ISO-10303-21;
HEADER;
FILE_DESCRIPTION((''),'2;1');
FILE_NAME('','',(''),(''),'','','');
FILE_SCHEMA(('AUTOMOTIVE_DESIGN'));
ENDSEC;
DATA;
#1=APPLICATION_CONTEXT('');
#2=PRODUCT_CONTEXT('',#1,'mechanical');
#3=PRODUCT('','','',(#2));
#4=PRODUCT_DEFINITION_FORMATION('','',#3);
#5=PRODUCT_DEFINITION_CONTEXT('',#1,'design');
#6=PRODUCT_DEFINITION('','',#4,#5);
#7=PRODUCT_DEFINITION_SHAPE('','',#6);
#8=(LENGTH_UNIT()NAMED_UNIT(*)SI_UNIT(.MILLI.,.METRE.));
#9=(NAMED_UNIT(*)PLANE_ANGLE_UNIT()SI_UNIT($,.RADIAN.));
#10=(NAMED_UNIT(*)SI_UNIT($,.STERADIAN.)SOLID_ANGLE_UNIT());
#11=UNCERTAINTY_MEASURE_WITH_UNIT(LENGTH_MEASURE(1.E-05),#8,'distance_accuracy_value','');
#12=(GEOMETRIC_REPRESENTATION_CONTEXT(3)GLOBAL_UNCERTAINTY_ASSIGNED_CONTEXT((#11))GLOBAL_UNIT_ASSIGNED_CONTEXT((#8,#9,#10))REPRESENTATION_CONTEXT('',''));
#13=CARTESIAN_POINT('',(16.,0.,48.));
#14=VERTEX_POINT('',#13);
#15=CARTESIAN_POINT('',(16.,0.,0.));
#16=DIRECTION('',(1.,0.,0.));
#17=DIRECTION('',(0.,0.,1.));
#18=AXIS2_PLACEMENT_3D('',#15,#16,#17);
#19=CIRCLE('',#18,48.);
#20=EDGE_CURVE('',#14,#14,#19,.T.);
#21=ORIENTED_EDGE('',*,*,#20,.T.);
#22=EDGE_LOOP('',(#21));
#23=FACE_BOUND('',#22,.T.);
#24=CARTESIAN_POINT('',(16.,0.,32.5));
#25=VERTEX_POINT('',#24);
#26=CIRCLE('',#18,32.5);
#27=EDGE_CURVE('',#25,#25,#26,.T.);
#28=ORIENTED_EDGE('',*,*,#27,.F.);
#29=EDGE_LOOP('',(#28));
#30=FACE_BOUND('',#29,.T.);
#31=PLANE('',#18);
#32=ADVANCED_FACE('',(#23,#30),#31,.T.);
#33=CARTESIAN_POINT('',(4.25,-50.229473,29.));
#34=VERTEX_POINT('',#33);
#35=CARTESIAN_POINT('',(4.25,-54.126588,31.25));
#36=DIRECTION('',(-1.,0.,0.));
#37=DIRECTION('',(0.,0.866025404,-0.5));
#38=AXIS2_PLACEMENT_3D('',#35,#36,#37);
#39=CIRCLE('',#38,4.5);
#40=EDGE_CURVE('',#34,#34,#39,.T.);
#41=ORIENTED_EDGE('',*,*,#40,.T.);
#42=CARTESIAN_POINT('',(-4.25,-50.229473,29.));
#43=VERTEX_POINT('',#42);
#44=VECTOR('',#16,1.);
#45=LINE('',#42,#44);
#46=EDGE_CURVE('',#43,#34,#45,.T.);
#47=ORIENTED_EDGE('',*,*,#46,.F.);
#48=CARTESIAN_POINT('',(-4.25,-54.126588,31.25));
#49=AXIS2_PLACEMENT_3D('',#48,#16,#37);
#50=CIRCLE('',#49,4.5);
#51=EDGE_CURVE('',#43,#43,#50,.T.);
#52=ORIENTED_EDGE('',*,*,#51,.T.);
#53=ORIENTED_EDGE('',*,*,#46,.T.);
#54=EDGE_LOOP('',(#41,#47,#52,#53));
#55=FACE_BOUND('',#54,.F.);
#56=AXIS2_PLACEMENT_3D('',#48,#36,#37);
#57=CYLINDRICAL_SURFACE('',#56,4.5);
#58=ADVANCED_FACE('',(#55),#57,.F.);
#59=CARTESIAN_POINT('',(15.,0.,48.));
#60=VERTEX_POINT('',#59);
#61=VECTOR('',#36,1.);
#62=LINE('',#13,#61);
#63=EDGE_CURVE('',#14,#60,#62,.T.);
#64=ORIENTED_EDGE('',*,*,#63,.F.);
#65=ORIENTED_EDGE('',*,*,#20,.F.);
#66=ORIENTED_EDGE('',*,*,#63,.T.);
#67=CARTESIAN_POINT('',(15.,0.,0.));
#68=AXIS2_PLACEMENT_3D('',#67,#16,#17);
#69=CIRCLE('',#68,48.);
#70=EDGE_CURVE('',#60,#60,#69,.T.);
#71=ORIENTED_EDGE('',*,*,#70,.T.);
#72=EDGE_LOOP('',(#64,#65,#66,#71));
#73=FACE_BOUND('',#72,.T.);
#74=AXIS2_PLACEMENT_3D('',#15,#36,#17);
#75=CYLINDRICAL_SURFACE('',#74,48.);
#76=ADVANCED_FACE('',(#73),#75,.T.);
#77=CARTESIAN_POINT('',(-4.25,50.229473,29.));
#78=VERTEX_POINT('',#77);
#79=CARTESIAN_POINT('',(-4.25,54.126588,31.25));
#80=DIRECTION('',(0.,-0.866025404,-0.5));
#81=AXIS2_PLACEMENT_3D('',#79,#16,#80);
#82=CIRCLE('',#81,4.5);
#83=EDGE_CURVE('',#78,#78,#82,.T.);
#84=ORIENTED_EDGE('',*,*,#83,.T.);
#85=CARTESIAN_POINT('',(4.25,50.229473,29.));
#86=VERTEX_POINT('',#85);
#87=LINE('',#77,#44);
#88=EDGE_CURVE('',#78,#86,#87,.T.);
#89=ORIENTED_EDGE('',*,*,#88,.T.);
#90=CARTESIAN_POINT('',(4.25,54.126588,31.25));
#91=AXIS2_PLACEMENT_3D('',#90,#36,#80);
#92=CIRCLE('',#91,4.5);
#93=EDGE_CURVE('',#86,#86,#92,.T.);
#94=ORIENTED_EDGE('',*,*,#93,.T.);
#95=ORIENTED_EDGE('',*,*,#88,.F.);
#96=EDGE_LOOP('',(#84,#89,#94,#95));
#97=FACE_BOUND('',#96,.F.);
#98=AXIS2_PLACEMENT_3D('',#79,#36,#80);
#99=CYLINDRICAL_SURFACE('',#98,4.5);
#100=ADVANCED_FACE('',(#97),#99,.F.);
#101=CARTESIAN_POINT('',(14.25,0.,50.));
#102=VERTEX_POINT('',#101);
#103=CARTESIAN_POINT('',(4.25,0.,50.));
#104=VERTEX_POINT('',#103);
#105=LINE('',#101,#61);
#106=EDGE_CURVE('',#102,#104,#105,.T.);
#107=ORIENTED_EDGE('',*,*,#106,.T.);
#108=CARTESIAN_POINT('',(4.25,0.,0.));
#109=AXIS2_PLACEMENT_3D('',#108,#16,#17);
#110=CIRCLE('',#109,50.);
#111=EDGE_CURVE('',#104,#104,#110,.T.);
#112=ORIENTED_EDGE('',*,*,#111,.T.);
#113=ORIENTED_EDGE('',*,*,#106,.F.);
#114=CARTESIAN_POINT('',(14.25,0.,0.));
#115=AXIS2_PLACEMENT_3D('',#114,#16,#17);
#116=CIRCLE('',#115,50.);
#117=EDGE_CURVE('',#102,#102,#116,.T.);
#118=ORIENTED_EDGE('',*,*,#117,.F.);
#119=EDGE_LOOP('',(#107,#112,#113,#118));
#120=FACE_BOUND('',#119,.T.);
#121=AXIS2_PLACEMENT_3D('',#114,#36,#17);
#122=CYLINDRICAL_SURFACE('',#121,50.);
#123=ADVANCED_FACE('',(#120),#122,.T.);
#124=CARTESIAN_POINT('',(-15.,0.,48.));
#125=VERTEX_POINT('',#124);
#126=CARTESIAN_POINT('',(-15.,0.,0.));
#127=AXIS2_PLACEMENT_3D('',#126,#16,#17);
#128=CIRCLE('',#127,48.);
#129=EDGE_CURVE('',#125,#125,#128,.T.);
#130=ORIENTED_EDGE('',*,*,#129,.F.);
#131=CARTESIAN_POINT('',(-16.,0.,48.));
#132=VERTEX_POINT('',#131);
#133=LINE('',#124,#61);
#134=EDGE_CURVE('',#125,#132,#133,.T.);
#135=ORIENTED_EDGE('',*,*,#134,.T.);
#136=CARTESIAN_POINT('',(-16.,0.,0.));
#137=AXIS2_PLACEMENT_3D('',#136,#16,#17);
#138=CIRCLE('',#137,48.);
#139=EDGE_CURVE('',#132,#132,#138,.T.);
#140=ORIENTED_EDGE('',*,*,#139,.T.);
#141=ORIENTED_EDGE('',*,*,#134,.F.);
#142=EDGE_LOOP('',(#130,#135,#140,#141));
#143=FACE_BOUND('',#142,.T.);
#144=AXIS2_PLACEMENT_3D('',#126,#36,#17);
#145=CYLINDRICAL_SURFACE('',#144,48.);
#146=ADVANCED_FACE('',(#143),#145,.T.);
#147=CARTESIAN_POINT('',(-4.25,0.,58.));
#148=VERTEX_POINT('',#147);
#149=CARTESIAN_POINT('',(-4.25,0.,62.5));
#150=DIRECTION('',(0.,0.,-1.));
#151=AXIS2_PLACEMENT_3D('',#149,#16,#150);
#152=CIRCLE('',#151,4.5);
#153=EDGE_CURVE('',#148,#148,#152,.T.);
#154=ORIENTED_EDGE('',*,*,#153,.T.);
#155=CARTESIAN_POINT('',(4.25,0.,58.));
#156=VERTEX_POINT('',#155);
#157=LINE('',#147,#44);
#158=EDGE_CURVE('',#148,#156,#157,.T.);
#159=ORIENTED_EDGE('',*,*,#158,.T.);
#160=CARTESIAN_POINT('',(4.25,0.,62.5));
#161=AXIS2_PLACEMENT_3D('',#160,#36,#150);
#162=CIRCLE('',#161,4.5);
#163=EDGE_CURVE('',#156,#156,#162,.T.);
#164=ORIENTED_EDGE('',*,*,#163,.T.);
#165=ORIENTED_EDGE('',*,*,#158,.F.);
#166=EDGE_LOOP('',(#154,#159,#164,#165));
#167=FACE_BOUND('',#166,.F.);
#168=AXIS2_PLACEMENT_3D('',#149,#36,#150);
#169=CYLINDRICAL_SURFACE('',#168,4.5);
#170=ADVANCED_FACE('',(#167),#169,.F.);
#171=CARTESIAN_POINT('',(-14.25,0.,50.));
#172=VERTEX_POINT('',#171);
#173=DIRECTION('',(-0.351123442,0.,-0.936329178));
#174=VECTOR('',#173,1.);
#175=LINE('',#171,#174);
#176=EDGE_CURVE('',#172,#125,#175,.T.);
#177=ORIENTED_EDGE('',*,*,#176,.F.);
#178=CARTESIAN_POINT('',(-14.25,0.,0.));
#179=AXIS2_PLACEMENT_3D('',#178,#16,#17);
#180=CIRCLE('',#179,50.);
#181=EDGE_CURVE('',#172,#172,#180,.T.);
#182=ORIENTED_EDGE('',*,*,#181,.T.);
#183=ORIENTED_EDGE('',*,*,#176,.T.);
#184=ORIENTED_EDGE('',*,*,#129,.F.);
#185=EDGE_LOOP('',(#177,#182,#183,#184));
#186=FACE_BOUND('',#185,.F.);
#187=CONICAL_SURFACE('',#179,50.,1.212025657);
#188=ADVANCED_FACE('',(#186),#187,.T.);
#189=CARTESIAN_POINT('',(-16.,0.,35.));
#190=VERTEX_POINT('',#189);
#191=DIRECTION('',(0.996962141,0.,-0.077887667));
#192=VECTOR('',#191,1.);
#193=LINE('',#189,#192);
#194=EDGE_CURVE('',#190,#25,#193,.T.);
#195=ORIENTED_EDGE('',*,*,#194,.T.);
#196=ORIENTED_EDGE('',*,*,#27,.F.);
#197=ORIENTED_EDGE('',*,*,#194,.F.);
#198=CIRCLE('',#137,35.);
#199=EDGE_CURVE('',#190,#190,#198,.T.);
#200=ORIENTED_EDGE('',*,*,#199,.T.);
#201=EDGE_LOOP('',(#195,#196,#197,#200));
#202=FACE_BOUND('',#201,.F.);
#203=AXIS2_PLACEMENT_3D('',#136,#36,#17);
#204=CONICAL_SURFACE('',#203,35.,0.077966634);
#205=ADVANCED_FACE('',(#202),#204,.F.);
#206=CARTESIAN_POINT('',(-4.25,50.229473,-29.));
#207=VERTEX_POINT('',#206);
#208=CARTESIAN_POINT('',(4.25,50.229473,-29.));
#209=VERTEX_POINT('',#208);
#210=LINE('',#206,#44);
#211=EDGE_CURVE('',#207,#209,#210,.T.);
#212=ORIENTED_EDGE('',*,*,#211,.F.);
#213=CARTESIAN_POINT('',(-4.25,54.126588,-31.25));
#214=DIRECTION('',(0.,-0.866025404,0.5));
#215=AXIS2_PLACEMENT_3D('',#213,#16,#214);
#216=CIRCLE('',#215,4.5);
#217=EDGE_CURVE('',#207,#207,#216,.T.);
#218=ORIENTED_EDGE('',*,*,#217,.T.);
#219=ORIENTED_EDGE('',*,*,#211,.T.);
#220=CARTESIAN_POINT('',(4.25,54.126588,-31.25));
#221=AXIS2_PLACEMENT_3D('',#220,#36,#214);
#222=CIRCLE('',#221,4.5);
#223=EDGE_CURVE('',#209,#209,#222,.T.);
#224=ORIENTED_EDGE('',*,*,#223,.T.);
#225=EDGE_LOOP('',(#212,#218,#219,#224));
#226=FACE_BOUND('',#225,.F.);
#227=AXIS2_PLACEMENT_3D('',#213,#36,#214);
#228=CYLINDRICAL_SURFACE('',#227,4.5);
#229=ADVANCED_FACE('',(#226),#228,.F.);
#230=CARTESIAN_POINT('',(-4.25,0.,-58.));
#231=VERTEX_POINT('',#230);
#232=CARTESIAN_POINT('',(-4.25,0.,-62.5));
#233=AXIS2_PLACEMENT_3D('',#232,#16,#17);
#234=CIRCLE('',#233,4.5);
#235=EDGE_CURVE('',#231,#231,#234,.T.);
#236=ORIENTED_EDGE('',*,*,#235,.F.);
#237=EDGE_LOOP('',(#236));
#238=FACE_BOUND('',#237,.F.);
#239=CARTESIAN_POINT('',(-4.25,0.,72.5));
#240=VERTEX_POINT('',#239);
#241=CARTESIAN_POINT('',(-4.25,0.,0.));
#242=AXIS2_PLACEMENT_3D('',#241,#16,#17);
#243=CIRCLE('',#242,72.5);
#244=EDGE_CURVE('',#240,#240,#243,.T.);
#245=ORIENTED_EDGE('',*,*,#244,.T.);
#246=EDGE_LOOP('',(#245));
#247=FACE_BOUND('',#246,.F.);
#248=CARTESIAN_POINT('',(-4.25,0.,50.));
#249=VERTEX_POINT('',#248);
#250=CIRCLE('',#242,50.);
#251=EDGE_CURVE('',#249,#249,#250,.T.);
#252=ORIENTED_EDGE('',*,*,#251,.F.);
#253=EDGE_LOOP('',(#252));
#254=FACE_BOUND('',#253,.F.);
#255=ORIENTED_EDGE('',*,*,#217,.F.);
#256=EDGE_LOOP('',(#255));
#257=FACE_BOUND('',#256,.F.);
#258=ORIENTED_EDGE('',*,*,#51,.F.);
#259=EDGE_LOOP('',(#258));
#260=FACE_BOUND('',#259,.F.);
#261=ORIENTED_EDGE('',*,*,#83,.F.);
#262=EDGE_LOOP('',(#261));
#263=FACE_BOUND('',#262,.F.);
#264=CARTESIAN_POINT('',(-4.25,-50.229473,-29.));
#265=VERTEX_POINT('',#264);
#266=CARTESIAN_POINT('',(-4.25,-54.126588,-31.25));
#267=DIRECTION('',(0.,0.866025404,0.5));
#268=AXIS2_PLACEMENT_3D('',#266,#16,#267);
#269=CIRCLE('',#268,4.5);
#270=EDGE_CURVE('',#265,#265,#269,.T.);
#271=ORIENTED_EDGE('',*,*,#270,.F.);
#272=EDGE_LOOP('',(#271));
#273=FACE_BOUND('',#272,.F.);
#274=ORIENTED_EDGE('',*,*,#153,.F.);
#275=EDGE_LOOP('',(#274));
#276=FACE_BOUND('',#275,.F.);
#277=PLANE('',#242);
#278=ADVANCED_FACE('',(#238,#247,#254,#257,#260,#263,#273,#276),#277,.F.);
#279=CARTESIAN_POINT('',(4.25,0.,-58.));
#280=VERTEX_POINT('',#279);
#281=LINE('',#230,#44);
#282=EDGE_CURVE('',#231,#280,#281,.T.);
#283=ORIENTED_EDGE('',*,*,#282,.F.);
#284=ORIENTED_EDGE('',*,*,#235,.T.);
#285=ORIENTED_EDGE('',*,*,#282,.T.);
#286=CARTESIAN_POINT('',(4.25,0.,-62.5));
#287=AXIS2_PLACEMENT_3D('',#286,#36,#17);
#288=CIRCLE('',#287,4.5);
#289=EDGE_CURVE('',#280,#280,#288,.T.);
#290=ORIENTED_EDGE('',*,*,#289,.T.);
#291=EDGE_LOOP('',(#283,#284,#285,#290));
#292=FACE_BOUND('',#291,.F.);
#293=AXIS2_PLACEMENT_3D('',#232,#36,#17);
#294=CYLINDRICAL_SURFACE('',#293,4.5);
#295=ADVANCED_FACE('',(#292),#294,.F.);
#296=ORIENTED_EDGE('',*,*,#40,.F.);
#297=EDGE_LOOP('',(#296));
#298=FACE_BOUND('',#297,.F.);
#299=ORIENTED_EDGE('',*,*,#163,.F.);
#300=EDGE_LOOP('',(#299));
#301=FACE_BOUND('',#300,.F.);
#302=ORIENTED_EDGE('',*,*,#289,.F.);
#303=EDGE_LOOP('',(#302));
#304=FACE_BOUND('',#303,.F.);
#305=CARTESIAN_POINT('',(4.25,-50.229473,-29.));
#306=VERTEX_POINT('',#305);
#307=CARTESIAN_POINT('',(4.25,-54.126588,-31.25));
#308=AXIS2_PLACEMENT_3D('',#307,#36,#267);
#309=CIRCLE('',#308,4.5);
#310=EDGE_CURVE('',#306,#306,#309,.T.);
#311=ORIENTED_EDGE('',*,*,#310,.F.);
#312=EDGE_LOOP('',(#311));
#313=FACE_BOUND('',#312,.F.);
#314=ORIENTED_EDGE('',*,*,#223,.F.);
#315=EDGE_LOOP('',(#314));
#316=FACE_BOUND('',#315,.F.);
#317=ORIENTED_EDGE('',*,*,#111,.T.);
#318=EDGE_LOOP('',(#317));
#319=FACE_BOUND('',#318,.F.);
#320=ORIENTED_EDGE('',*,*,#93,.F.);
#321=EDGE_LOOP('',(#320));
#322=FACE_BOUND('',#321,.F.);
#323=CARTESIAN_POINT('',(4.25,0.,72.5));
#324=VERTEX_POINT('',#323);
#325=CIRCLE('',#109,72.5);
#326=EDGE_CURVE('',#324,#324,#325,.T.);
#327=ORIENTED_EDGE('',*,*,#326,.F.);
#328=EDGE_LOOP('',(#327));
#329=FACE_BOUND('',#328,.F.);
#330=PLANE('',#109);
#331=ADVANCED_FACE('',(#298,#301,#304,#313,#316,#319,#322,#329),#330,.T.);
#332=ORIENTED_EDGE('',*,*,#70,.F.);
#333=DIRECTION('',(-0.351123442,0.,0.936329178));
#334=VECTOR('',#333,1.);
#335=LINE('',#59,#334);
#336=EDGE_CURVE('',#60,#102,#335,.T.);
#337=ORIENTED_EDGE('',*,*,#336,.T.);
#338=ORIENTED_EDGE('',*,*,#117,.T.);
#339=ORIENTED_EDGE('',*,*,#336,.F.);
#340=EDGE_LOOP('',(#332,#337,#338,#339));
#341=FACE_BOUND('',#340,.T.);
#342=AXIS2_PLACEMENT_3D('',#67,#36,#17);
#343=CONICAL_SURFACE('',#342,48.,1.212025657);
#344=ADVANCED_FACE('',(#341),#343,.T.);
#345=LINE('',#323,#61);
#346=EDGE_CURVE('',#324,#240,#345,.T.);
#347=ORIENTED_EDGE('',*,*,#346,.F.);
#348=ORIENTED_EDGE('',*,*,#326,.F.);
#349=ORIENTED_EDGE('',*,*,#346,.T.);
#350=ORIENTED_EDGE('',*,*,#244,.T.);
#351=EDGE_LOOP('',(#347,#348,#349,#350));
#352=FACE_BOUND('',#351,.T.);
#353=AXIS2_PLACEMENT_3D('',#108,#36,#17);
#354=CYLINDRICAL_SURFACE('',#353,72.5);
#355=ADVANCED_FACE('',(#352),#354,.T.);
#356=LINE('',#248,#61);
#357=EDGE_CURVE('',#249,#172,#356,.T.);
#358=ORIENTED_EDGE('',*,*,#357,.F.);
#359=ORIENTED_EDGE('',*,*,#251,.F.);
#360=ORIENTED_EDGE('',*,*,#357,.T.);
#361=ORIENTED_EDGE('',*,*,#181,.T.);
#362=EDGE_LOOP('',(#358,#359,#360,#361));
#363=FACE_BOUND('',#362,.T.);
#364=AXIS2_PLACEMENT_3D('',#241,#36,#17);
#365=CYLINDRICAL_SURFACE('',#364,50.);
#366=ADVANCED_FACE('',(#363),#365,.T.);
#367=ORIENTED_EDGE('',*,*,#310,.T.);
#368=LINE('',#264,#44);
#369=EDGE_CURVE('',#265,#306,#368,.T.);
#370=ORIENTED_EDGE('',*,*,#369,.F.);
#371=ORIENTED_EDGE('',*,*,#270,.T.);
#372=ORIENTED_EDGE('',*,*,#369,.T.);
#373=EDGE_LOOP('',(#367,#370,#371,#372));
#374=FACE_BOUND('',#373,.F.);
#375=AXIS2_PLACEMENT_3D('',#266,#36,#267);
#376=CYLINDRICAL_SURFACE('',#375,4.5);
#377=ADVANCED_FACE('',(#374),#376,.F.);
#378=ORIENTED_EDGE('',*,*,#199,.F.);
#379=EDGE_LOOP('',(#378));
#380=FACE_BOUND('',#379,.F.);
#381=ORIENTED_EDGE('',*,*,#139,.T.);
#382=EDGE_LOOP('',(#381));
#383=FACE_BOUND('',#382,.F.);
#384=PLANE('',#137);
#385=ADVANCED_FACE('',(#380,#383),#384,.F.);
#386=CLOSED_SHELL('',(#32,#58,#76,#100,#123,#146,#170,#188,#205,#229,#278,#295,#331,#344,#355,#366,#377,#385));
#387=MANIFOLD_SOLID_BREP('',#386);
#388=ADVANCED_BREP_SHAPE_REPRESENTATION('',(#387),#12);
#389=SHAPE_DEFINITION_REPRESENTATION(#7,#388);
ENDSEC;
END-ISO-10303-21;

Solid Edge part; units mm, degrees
sketch "Sketch1" plane through (0, 0, 0) normal (0, -1, 0) x (1, 0, 0)
  line L0 (-4.25, 72.5) -> (-4.25, 50)
  line L1 (-4.25, 50) -> (-14.25, 50)
  line L2 (-14.25, 50) -> (-15, 48)
  line L3 (-15, 48) -> (-16, 48)
  line L4 (-16, 48) -> (-16, 35)
  line L5 (-16, 35) -> (16, 32.5)
  line L6 (16, 48) -> (16, 32.5)
  line L7 (16, 48) -> (15, 48)
  line L8 (15, 48) -> (14.25, 50)
  line L9 (14.25, 50) -> (4.25, 50)
  line L10 (4.25, 50) -> (4.25, 72.5)
  line L11 (4.25, 72.5) -> (-4.25, 72.5)
  dimension "D1" = 72.5
  dimension "D2" = 50
  dimension "D3" = 48
  dimension "D4" = 10
  dimension "D5" = 16
  dimension "D6" = 16
  dimension "D7" = 8.5
  dimension "D8" = 1
  dimension "D9" = 11.75
  dimension "D10" = 35
  dimension "D11" = 32.5
revolve "RevolvedProtrusion1" add sketch "Sketch1" angle 360 about axis through (-60, 0, 0) along (1, 0, 0)
hole "Hole1" at (-4.25, 0, -62.5) direction (1, 0, 0) diameter 9 end up to next
pattern_circular "Pattern1" count 6 over 360 about axis through (-4.25, 0, 0) along (-1, 0, 0) of "Hole1"
extrude "Cutout1" [suppressed]
hole "Bohrung_9" [suppressed]
properties material "Stahl"
